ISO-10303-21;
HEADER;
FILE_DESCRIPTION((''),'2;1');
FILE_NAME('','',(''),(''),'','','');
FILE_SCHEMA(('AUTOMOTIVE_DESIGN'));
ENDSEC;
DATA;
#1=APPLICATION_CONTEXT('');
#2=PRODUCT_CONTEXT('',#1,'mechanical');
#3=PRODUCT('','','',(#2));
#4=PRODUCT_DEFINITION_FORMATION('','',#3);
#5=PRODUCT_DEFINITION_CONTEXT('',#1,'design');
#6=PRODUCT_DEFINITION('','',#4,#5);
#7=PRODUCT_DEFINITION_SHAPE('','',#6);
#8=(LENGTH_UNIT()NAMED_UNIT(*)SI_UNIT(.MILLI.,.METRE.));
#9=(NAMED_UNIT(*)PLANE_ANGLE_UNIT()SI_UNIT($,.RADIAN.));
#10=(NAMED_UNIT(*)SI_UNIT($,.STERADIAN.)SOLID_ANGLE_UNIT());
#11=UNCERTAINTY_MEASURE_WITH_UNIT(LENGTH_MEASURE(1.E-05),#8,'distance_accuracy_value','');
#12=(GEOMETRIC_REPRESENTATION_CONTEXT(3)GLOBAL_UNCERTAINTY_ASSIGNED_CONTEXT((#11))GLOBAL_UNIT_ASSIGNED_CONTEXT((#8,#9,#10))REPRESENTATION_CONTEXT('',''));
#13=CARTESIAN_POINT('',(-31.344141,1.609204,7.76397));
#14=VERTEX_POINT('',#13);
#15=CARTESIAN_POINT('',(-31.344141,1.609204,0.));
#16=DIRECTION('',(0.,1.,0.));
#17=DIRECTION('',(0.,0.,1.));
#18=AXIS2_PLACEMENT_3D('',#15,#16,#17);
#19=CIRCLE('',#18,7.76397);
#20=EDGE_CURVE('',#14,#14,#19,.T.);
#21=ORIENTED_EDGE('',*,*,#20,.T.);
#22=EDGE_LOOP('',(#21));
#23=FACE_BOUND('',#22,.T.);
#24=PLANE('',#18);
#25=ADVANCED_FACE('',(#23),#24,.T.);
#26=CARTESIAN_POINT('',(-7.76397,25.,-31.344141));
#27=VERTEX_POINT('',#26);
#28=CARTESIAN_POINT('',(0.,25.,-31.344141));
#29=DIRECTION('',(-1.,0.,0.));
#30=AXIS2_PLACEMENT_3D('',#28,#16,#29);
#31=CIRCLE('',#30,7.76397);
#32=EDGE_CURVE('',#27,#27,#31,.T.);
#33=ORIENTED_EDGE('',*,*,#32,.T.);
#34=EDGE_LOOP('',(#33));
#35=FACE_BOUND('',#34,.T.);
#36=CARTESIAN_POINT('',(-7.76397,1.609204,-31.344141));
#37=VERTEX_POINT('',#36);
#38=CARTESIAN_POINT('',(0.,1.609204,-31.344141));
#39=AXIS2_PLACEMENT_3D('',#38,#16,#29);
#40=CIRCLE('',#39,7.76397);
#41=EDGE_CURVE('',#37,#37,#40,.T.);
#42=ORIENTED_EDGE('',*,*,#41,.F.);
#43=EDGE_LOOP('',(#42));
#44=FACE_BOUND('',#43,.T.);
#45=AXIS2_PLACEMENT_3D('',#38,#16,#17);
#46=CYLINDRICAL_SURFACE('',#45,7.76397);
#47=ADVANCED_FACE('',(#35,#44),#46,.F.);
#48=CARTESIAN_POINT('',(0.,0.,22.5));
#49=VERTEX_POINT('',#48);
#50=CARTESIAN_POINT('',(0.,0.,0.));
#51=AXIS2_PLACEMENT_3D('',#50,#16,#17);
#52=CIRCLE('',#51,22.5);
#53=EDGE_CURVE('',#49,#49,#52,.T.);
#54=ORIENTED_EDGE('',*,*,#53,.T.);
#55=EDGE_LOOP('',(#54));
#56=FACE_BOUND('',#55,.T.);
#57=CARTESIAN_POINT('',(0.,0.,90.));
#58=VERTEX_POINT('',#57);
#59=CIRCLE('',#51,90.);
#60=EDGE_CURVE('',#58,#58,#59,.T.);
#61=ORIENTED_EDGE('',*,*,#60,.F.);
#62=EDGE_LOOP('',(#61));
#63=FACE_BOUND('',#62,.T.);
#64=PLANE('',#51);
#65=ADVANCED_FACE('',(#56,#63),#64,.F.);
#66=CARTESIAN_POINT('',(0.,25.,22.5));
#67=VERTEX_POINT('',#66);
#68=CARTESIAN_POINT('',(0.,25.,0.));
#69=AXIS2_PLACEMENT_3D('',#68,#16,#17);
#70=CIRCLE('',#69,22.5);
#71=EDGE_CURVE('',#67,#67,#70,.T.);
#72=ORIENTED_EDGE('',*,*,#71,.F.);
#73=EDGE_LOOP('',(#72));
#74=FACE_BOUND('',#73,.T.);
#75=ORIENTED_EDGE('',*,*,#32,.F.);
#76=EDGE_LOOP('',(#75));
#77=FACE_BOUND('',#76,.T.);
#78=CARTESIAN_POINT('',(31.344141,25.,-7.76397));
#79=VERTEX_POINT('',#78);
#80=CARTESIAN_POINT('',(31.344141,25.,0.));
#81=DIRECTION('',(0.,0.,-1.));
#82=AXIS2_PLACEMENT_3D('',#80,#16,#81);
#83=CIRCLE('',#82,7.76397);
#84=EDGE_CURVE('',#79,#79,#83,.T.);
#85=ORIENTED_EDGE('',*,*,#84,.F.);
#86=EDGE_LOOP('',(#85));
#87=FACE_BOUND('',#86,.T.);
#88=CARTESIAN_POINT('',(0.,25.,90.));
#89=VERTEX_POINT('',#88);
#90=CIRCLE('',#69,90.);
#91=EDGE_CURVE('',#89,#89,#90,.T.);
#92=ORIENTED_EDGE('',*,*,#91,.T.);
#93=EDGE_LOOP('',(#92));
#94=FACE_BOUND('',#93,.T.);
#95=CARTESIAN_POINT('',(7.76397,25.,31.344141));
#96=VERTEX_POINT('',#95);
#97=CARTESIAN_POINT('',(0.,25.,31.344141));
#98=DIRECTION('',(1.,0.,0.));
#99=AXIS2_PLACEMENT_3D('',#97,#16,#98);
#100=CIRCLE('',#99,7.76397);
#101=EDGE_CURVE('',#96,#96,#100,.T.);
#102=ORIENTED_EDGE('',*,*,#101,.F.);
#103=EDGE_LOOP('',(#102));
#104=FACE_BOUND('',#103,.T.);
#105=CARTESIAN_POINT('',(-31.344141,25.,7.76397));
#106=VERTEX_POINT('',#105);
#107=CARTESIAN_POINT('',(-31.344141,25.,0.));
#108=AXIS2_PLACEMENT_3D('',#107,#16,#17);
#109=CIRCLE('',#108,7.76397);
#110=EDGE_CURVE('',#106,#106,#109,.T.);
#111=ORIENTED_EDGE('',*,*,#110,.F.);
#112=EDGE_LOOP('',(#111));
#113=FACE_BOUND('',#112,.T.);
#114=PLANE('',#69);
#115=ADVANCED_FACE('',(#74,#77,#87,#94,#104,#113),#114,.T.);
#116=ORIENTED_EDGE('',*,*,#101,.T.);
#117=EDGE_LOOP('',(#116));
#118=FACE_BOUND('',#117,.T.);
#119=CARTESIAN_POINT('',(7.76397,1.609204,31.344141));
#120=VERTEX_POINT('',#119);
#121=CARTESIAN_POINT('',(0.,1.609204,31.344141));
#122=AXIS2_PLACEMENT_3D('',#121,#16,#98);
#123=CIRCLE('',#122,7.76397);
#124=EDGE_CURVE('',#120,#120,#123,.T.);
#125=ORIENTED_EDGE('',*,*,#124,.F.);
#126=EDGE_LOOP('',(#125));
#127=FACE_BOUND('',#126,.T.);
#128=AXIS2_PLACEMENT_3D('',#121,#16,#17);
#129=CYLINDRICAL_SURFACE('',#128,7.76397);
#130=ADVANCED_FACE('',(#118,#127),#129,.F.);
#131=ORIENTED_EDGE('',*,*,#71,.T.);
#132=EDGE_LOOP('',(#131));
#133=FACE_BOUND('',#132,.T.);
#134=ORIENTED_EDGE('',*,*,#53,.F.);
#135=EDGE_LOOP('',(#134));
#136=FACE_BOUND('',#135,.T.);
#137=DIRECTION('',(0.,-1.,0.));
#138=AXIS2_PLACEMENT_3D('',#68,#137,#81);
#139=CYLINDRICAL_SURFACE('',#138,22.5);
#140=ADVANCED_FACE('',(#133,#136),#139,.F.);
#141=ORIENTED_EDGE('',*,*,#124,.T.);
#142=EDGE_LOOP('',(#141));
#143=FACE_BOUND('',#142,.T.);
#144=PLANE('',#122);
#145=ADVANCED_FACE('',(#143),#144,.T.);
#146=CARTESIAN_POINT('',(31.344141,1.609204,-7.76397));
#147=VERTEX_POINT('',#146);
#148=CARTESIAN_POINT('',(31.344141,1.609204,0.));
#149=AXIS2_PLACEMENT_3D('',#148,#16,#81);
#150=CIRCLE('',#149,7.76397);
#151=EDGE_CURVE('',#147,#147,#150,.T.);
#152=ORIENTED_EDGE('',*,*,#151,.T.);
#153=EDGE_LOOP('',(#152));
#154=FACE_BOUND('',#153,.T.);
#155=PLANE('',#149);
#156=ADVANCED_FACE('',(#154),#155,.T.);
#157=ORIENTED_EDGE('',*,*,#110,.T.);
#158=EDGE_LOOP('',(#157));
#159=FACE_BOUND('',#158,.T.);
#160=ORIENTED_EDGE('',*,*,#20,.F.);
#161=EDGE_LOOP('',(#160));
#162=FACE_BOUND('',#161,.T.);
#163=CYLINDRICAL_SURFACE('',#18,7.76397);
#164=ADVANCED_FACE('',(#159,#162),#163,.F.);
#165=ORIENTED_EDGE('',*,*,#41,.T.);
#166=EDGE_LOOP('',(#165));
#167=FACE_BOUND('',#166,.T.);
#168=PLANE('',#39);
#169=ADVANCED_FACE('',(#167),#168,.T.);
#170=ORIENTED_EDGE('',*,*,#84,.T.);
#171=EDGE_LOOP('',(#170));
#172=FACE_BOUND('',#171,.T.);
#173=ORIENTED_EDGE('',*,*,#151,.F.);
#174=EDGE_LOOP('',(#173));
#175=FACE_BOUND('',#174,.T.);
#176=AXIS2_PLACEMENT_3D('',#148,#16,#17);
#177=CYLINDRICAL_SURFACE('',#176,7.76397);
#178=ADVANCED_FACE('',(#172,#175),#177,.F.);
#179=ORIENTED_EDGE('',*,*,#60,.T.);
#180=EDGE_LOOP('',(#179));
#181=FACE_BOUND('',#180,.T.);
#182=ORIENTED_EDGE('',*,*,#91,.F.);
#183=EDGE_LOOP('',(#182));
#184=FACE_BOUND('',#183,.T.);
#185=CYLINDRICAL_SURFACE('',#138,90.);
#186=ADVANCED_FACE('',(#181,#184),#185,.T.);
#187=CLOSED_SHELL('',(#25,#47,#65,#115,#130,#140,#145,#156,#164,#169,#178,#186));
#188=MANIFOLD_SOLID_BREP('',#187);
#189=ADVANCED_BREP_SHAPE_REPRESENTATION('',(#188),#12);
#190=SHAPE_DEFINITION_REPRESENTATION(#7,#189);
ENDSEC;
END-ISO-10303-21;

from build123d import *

# Parameters (mm, degrees)
SKETCH1_R           = 90
BOSS_EXTRUDE1_DEPTH = 25
SKETCH2_R           = 22.5
CUT_EXTRUDE1_DEPTH  = 130.711217711
SKETCH3_R           = 7.763970005
CUT_EXTRUDE2_DEPTH  = 23.390795668
CIRPATTERN1_COUNT   = 4


with BuildPart() as part:
    # Sketch1 → Boss-Extrude1 (new body)
    with BuildSketch(Plane(origin=(0, 0, 0), x_dir=(1, 0, 0), z_dir=(0, 1, 0))):
        Circle(SKETCH1_R)
    extrude(amount=BOSS_EXTRUDE1_DEPTH)

    # Sketch2 → Cut-Extrude1 (cut, through all)
    with BuildSketch(Plane(origin=(0, 0, 0), x_dir=(1, 0, 0), z_dir=(0, 1, 0))):
        Circle(SKETCH2_R)
    extrude(amount=CUT_EXTRUDE1_DEPTH, mode=Mode.SUBTRACT)

    # Sketch3 → Cut-Extrude2 (cut)
    with BuildSketch(Plane(origin=(0, 25, 0), x_dir=(1, 0, 0), z_dir=(0, 1, 0))):
        with Locations((-31.344140601, 0)):
            Circle(SKETCH3_R)
    cut_extrude2 = extrude(amount=-CUT_EXTRUDE2_DEPTH, mode=Mode.SUBTRACT)

    # CirPattern1: Cut-Extrude2 ×4 about axis
    cirpattern1_axis = Axis((0, 0, 0), (0, 1, 0))
    for i in range(1, CIRPATTERN1_COUNT):
        add(cut_extrude2.rotate(cirpattern1_axis, i * 360 / CIRPATTERN1_COUNT), mode=Mode.SUBTRACT)


solid = part.part
